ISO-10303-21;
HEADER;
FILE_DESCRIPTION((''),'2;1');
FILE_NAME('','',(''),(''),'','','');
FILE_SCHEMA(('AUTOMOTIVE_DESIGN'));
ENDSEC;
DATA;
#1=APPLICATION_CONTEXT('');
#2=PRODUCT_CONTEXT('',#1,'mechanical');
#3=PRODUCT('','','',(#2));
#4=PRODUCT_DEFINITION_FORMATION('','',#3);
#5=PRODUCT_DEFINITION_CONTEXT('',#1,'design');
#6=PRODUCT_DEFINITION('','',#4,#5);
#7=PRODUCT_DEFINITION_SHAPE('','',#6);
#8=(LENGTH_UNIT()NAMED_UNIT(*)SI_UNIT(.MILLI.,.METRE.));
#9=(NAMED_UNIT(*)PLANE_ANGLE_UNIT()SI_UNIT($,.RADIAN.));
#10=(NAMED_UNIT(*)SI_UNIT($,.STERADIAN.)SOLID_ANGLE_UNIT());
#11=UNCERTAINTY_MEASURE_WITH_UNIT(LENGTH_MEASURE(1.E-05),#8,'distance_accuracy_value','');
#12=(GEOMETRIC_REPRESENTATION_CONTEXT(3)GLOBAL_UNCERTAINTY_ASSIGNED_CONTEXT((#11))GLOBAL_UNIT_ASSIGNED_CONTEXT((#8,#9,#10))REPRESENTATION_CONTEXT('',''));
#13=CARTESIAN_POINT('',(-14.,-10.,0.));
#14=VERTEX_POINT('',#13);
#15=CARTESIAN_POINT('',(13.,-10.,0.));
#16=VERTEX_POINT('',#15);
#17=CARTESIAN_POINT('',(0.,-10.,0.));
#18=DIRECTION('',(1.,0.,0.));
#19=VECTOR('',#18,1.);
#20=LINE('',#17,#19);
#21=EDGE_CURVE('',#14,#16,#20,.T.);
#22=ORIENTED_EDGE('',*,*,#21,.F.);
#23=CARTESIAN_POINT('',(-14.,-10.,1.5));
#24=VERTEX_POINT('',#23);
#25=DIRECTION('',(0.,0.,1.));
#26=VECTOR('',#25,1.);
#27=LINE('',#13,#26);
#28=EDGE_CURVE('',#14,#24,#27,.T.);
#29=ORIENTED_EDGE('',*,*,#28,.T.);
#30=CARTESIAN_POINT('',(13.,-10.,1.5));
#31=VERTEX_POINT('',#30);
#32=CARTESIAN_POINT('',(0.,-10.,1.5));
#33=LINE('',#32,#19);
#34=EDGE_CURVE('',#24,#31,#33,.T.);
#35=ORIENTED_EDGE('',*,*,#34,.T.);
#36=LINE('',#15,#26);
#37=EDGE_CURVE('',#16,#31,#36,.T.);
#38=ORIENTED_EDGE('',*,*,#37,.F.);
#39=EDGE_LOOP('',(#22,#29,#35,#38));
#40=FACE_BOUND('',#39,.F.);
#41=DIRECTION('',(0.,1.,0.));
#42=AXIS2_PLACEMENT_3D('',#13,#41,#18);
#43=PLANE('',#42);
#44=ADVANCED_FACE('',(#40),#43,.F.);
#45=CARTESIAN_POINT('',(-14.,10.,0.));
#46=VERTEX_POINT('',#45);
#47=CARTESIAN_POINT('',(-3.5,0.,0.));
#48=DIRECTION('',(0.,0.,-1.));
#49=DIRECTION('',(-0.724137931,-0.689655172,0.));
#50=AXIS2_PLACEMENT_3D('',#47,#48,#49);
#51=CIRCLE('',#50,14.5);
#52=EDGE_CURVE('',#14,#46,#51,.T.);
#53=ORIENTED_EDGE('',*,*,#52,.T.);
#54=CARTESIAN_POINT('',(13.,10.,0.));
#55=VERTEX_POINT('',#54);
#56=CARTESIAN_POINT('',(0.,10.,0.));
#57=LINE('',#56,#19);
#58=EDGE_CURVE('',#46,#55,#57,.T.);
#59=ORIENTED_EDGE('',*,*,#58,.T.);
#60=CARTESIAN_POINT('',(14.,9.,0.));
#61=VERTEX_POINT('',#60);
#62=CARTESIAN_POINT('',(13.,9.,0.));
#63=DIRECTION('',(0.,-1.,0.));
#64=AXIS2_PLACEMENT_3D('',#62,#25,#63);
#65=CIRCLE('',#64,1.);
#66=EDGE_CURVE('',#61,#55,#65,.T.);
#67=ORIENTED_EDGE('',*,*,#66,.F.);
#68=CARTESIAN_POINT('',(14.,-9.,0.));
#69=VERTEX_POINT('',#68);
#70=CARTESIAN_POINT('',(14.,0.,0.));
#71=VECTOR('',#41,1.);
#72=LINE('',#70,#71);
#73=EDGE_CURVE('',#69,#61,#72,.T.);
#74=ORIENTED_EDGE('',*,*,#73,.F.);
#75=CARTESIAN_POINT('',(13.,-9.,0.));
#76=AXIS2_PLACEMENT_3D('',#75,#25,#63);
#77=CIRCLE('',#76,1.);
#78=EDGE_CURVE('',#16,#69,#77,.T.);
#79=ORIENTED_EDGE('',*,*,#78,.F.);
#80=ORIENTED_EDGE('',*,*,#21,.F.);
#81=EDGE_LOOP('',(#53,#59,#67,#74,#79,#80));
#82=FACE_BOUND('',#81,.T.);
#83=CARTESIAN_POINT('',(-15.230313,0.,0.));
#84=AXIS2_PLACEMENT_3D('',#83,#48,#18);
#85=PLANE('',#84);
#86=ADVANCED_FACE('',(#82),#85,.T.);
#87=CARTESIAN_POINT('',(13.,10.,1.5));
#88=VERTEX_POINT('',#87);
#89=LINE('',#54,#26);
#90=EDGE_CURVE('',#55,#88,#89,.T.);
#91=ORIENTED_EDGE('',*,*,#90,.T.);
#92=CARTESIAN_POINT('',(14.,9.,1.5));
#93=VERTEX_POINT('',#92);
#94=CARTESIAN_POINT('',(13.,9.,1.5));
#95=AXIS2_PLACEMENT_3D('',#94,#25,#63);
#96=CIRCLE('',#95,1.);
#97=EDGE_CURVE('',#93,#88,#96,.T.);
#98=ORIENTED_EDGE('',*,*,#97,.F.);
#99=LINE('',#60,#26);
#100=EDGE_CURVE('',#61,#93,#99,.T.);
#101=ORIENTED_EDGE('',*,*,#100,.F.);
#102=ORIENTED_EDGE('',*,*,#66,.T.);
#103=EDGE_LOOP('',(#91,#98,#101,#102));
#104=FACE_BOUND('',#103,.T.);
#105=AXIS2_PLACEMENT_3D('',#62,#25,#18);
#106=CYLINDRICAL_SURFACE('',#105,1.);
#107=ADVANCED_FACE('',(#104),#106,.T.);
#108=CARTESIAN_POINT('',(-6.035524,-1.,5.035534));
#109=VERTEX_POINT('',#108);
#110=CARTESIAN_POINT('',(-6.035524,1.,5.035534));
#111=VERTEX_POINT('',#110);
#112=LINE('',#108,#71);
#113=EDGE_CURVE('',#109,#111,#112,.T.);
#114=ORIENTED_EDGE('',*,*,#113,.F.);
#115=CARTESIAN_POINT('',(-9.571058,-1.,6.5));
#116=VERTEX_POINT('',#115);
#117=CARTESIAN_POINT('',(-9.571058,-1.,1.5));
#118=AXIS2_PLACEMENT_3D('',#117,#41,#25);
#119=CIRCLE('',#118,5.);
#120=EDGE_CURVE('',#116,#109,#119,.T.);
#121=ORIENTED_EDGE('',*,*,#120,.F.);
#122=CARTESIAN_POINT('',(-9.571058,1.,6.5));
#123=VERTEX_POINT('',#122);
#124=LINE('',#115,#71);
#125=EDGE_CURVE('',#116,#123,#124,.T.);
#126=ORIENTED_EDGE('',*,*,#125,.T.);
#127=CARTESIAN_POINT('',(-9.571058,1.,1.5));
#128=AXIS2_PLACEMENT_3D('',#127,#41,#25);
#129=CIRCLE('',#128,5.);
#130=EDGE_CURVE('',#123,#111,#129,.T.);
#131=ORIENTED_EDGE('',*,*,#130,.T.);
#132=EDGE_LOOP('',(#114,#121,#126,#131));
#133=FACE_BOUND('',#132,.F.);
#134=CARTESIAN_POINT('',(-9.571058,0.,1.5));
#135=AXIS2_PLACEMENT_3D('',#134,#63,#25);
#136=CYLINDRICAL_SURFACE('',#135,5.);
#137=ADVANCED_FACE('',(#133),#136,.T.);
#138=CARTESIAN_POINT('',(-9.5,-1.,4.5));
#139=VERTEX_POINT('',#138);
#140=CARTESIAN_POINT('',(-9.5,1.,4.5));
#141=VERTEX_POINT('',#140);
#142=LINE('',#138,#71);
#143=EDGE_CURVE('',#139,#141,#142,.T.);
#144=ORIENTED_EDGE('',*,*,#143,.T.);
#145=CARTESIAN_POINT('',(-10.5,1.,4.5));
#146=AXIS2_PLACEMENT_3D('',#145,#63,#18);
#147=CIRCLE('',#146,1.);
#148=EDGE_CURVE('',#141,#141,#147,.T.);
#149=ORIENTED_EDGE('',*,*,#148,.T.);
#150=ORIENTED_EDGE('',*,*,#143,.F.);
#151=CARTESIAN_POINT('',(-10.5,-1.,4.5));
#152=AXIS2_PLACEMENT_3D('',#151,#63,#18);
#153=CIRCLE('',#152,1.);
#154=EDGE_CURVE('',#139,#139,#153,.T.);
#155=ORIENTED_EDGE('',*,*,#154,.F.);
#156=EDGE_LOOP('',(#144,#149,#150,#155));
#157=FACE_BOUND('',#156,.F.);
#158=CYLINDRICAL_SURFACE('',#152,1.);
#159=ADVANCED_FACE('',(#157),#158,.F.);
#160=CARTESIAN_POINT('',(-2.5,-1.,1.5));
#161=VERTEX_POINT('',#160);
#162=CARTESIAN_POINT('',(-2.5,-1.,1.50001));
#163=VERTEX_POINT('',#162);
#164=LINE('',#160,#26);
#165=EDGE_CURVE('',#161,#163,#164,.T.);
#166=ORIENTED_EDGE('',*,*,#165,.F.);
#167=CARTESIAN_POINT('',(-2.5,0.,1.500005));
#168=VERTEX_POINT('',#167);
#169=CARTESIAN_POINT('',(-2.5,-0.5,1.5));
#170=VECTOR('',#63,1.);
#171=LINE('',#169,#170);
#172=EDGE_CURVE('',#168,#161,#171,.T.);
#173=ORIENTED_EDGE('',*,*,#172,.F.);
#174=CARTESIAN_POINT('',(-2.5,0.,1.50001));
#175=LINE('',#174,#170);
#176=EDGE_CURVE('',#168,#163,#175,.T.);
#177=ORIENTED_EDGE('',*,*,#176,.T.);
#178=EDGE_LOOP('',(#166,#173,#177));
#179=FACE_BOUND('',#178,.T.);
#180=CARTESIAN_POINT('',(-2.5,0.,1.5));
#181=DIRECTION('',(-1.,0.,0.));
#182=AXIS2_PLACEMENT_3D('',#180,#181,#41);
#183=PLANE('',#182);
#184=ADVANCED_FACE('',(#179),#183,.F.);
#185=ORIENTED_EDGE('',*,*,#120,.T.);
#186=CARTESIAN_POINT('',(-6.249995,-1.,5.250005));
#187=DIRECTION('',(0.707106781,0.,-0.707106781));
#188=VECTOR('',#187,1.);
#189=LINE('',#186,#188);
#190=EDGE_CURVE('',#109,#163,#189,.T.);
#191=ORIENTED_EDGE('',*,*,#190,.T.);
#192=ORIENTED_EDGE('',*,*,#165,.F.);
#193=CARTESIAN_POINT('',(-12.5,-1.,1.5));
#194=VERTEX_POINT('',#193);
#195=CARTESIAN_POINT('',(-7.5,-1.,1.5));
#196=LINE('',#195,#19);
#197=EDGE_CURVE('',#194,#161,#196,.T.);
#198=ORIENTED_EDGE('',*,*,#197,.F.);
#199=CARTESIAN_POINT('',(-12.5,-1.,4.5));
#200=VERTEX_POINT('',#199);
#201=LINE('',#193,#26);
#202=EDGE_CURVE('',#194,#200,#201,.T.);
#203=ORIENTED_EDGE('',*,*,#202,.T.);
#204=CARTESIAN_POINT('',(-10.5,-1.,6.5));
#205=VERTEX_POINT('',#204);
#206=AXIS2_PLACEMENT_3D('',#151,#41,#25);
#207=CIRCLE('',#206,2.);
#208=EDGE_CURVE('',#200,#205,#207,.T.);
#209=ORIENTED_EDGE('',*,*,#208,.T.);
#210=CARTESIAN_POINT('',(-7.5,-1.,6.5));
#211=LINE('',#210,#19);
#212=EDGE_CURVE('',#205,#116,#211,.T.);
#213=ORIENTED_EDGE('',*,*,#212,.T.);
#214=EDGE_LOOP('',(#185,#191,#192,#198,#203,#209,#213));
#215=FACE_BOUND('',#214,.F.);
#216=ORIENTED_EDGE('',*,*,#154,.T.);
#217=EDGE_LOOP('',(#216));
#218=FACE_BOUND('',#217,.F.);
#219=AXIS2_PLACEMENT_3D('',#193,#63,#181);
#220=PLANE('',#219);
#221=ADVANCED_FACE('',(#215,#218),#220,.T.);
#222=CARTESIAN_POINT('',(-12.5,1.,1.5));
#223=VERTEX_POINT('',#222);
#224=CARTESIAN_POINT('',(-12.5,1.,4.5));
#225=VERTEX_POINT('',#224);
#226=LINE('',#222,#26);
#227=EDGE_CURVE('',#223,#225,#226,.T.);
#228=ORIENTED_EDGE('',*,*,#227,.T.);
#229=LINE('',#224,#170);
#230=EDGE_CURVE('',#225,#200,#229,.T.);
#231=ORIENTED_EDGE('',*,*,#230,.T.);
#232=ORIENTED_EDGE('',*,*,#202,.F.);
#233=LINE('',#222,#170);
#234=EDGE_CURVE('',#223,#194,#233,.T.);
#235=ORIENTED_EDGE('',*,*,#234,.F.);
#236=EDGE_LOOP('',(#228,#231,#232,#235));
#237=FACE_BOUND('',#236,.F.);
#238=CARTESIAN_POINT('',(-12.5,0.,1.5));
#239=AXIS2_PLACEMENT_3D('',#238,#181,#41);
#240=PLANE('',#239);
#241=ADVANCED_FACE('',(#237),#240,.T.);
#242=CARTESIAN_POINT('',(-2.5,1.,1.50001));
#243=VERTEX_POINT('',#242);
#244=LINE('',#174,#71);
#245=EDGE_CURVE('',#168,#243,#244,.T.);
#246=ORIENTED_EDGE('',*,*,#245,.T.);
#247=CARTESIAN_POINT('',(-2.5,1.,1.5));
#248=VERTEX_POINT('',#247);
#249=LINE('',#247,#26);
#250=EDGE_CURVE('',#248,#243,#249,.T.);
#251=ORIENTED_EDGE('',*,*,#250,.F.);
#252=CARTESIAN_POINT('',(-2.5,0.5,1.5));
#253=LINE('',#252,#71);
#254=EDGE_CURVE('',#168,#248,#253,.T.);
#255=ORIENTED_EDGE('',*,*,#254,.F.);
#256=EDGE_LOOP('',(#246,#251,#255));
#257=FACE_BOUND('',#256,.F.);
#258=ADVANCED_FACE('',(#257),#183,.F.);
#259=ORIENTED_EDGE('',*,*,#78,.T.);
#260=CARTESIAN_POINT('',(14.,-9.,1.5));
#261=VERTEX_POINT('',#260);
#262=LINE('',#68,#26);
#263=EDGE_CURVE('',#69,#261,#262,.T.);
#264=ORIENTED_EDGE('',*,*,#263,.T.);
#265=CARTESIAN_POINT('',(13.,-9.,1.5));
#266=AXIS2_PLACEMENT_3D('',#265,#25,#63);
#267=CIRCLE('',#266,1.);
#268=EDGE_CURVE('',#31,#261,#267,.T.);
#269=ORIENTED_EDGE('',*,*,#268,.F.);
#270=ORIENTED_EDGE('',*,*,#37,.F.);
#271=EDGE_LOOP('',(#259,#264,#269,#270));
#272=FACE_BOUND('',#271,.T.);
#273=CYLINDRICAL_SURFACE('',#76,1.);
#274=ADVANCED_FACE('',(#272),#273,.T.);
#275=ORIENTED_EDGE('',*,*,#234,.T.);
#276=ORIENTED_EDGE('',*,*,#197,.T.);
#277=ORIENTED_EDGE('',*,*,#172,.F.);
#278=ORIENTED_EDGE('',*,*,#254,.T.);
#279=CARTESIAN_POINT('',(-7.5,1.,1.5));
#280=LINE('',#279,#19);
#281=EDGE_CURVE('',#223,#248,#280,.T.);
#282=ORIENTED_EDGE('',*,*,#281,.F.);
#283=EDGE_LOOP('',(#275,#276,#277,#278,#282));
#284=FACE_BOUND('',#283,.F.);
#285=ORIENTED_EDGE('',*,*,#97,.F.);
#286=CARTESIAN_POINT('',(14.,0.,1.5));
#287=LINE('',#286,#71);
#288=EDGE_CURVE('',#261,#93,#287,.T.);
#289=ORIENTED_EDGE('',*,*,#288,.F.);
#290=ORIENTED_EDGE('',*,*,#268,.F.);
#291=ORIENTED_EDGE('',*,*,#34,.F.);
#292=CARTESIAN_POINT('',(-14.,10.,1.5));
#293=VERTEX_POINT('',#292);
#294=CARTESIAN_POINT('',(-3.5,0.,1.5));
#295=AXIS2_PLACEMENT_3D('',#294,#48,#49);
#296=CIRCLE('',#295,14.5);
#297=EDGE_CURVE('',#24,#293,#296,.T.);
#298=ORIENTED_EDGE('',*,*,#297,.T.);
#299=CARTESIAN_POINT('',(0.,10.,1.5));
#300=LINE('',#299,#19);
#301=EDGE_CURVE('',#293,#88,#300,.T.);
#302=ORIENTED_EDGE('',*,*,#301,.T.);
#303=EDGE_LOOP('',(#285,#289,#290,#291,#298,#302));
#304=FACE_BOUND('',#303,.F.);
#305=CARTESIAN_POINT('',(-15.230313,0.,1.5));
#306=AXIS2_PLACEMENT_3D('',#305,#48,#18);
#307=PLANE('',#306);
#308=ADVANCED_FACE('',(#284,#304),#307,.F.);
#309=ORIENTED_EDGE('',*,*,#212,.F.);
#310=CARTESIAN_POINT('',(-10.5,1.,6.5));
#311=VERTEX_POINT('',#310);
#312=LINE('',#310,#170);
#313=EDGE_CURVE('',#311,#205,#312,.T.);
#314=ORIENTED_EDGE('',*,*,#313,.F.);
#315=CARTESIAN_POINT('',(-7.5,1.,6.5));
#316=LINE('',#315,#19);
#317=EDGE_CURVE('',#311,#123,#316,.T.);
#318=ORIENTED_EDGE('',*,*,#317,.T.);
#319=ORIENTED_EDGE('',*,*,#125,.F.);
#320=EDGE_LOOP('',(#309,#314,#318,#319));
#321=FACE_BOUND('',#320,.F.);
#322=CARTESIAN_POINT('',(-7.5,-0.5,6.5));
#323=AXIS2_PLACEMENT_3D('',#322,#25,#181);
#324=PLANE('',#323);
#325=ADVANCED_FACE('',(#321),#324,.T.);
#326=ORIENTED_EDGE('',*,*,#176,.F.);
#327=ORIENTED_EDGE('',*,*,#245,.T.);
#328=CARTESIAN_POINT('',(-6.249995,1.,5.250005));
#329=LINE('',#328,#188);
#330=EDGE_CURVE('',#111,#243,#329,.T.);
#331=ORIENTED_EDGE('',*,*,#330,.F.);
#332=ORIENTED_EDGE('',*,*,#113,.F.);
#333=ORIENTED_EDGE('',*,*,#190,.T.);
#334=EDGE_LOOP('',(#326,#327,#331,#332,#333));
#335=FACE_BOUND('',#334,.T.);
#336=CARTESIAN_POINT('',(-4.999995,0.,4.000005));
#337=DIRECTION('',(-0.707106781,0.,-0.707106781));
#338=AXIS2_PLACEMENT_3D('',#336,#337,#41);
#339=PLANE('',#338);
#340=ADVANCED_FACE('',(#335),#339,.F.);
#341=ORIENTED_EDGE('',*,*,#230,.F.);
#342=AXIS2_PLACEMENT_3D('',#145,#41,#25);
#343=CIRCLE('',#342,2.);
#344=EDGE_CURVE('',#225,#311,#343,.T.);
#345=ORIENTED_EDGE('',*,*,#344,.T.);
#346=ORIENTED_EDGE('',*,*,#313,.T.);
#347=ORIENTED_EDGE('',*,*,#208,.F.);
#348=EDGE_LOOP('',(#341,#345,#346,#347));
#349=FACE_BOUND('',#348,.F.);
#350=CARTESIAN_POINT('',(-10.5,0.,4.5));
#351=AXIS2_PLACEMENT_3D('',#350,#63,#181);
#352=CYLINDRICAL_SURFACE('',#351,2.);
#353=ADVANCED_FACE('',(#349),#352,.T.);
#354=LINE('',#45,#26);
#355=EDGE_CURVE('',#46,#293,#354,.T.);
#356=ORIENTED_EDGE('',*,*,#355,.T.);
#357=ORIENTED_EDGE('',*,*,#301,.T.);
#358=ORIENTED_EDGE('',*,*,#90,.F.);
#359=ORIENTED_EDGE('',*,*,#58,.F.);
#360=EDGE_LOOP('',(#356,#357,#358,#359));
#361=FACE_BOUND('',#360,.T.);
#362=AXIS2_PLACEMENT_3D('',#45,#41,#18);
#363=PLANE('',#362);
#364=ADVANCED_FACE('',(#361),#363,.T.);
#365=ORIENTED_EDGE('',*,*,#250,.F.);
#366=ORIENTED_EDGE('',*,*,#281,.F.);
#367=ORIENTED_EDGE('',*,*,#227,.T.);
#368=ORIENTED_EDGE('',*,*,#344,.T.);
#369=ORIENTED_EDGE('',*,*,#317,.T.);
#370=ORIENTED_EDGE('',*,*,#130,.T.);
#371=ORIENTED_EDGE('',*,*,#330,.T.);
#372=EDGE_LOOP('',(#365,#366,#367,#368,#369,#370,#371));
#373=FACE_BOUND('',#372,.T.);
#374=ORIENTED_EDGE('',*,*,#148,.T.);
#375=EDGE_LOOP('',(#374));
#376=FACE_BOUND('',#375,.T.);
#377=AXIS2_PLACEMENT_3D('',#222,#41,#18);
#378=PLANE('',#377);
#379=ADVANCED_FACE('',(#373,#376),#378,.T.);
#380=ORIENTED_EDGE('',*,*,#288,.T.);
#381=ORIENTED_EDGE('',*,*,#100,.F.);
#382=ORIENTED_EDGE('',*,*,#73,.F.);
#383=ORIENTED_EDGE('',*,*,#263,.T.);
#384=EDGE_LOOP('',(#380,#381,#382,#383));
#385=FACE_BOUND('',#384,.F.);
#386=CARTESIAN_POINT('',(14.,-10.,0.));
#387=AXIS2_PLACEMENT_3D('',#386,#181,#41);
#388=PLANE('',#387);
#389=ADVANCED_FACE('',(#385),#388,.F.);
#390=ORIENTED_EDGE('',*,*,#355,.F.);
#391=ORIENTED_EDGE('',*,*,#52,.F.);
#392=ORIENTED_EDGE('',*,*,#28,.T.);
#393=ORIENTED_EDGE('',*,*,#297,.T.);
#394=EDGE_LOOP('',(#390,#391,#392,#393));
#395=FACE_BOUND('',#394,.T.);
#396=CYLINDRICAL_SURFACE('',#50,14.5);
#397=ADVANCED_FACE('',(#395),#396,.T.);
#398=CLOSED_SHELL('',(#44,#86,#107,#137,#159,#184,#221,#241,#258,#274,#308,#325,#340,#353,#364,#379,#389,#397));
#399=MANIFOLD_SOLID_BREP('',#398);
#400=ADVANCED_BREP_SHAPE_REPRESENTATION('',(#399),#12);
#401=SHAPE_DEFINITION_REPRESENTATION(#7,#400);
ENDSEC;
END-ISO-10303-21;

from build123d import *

# Parameters (mm, degrees)
F0_W      = 28
F0_H      = 20
F1_DEPTH  = 1.5
F2_R      = 1
F3_W      = 10
F3_H      = 1
F4_DEPTH  = 5
F5_R      = 2
F6_SIZE   = 4.99999
F7_R      = 5
F9_R      = 1
F10_DEPTH = 25
F12_DEPTH = 1.5


# Not quite as in the source:
# - a fillet or chamfer is up to 0.001 mm smaller than in the source, because OpenCascade refuses the exact size


with BuildPart() as f1:
    # F0 (on Top) → F1 (new body)
    with BuildSketch(Plane.XY):
        Rectangle(F0_W, F0_H)
    extrude(amount=F1_DEPTH)

    # F2
    f2_edges = [f1.edges().sort_by_distance(p)[0] for p in [
        (14, -10, 0.75),
        (14, 10, 0.75),
    ]]
    fillet(f2_edges, radius=F2_R)



with BuildPart() as f4:
    # F3 (on face) → F4 (new body)
    with BuildSketch(Plane.XY.offset(1.5)):
        with Locations((-7.5, 0.5)):
            Rectangle(F3_W, F3_H)
    extrude(amount=F4_DEPTH)

    # F5
    f5_edges = [f4.edges().sort_by_distance(p)[0] for p in [
        (-12.5, 0.5, 6.5),
    ]]
    fillet(f5_edges, radius=F5_R)

    # F6 (size 5 in the source; OpenCascade refuses exactly that, so slightly less here)
    f6_edges = [f4.edges().sort_by_distance(p)[0] for p in [
        (-2.5, 0.5, 6.5),
    ]]
    chamfer(f6_edges, length=F6_SIZE)

    # F7
    f7_edges = [f4.edges().sort_by_distance(p)[0] for p in [
        (-7.49999, 0.5, 6.5),
    ]]
    fillet(f7_edges, radius=F7_R)


with BuildPart() as f1_1:
    add(f1.part)

    add(f4.part)  # F8 merges F4
    # F8: F4 across plane
    add(f4.part.mirror(Plane.XZ))

    # F9 (on face) → F10 (cut)
    with BuildSketch(Plane.XZ.offset(1)):
        with Locations((-10.5, 4.5)):
            Circle(F9_R)
    extrude(amount=-F10_DEPTH, mode=Mode.SUBTRACT)

    # F11 (on face) → F12 (join)
    with BuildSketch(Plane(origin=(0, 0, 0), x_dir=(1, 0, 0), z_dir=(0, 0, -1))):
        with BuildLine():
            Line((-14, -10), (-14, 10))
            ThreePointArc((-14, 10), (-18, 0), (-14, -10))
        make_face()
    extrude(amount=-F12_DEPTH)


solid = f1_1.part
